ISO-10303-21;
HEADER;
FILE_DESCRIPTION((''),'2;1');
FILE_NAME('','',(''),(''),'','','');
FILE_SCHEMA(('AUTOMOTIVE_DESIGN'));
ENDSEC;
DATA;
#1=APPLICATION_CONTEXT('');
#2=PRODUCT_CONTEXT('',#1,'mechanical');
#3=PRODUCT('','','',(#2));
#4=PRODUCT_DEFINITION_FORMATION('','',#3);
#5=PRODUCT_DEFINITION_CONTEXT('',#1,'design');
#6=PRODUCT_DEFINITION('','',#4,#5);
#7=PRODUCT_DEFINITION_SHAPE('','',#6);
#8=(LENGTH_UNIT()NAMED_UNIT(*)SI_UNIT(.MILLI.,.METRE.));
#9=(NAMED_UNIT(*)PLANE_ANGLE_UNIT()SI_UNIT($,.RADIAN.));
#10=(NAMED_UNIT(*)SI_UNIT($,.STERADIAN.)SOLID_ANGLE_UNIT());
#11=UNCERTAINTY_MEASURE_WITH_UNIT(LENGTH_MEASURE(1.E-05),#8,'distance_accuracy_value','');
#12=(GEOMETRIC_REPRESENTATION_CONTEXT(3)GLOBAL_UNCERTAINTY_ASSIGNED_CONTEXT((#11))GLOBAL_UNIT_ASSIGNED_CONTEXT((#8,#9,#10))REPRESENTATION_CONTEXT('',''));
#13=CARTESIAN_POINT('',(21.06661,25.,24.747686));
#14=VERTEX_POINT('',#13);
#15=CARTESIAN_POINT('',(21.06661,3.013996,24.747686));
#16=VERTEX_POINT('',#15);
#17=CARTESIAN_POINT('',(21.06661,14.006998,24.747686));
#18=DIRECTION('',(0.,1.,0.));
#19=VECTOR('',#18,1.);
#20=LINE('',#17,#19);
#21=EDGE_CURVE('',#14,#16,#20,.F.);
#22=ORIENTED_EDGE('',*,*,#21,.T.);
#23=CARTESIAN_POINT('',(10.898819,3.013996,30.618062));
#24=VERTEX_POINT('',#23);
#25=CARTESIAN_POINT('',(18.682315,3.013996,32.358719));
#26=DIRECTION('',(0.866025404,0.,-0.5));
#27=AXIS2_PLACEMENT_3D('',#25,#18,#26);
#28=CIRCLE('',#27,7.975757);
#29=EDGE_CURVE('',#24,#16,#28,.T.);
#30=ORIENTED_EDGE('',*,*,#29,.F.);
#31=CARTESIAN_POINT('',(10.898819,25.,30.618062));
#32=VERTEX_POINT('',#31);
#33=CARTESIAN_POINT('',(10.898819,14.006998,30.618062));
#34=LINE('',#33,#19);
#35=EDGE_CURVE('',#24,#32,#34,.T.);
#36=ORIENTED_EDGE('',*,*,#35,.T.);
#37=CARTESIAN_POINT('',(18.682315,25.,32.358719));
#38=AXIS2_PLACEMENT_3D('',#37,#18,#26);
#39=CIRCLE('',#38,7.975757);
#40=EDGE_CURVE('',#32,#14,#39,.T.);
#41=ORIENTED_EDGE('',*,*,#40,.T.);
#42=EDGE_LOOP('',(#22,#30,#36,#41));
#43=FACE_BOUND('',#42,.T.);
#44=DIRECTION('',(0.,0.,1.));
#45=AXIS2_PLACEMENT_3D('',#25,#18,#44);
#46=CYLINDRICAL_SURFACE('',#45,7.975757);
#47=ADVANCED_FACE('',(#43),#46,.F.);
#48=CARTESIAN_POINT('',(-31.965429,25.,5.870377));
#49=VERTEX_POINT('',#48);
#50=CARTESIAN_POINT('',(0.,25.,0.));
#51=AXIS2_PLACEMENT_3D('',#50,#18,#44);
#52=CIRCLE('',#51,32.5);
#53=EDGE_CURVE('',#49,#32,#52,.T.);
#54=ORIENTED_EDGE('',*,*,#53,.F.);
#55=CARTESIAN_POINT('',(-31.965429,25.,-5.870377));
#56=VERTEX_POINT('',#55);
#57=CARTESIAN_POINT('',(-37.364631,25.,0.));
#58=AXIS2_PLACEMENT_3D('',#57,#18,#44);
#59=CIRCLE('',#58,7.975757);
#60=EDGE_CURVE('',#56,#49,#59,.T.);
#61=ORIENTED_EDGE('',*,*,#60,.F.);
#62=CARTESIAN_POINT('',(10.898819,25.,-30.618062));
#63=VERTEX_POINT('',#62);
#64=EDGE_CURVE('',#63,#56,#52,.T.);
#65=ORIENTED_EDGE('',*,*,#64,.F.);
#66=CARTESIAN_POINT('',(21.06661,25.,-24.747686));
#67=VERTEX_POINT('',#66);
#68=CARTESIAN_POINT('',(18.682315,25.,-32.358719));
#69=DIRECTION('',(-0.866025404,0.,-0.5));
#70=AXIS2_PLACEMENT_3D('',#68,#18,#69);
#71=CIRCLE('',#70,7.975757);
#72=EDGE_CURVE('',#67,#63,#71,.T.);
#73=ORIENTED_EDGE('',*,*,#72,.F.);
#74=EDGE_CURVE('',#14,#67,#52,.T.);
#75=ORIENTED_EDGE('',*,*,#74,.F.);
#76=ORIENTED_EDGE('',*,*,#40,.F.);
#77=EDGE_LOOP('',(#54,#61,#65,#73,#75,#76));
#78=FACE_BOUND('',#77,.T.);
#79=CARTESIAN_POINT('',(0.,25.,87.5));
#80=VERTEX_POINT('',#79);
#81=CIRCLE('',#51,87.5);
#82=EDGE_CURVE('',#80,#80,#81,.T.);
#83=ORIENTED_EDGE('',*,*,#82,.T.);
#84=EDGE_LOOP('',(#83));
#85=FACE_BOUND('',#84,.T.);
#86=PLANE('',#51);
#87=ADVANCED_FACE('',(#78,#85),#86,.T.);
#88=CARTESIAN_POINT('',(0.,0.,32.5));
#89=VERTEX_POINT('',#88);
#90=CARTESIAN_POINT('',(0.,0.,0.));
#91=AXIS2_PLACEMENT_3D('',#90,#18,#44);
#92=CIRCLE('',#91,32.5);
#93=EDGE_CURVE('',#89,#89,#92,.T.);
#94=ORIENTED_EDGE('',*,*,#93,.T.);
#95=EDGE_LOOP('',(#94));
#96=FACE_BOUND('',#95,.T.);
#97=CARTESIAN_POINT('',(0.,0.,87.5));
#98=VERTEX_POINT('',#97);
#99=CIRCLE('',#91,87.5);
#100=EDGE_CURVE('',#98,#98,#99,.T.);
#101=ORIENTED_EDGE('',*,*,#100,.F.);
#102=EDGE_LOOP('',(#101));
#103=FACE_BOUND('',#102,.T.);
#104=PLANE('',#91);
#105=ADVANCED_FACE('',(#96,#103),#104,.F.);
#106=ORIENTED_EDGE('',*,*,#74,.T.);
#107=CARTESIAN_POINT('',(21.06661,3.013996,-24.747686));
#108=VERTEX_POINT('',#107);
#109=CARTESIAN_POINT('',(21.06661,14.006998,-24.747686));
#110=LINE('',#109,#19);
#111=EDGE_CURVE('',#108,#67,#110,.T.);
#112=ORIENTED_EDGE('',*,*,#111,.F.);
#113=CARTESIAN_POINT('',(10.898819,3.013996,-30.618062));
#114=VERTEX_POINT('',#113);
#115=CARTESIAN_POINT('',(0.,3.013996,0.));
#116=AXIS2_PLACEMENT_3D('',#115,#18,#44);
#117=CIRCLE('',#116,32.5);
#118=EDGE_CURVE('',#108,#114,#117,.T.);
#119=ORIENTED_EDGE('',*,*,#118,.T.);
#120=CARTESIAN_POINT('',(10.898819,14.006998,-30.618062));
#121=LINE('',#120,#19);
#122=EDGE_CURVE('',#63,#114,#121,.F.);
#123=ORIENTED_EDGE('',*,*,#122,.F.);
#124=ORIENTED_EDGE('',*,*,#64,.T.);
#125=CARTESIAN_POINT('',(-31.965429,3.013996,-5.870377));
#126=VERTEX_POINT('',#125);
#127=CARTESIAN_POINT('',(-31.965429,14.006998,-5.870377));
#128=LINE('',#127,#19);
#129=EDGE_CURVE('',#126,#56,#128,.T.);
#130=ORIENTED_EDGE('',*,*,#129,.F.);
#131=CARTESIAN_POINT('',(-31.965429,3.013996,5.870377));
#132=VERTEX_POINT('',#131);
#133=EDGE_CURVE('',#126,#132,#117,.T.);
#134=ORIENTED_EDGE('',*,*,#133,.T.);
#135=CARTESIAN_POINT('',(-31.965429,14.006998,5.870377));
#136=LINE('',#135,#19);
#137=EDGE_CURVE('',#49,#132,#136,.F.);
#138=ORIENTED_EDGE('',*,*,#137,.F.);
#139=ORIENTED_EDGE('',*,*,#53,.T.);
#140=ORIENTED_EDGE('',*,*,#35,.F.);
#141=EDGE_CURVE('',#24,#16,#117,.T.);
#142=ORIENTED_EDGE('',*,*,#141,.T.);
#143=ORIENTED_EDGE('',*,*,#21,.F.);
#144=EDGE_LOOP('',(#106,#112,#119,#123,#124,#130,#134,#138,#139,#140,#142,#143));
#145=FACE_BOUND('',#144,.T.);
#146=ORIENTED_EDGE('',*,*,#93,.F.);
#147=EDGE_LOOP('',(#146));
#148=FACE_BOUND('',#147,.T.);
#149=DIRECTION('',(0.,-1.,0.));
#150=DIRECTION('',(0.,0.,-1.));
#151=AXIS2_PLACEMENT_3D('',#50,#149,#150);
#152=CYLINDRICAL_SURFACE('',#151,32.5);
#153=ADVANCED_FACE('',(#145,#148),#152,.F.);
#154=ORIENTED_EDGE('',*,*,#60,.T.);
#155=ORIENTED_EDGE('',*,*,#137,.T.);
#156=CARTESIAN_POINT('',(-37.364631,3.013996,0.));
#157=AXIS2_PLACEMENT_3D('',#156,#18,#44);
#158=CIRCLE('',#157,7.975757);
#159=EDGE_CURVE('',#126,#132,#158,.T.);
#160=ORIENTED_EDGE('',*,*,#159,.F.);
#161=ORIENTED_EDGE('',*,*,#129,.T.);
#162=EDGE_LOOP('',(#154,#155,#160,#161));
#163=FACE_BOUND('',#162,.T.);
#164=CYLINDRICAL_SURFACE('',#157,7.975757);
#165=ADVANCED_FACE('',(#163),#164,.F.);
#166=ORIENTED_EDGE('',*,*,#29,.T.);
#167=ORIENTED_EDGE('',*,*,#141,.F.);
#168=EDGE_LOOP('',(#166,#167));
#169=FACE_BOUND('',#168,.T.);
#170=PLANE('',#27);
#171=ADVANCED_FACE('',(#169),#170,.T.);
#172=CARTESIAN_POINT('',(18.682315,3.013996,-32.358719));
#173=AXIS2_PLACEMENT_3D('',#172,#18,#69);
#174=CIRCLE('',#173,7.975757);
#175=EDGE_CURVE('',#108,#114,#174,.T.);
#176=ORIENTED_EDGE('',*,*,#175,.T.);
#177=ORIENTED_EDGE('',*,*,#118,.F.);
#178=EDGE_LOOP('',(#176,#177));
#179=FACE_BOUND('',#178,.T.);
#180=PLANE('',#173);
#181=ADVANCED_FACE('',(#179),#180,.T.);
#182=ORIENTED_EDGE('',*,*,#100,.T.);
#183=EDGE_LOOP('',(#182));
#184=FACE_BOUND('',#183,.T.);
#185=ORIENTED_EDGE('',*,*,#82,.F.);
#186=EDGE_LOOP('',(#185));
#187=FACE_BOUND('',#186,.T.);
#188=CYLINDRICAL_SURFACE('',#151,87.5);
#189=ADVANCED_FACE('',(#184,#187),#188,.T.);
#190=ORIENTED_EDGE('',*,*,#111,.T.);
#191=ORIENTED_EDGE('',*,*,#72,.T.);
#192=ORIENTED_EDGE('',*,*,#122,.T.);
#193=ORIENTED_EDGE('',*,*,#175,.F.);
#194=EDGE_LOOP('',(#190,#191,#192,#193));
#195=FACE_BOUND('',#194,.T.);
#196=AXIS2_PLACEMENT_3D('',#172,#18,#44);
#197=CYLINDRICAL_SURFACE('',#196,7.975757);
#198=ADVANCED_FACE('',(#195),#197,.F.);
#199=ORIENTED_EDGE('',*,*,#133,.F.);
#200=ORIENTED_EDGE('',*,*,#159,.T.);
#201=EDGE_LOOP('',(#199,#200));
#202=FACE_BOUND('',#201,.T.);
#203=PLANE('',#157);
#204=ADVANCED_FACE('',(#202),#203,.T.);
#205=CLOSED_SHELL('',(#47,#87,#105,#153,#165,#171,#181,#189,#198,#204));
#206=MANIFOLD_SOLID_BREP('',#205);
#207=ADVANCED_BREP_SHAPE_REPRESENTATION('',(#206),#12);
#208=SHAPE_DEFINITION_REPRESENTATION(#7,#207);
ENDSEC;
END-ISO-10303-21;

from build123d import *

# Parameters (mm, degrees)
SKETCH1_R           = 87.5
BOSS_EXTRUDE1_DEPTH = 25
SKETCH2_R           = 32.5
CUT_EXTRUDE1_DEPTH  = 127.24381173
SKETCH3_R           = 7.975756775
CUT_EXTRUDE2_DEPTH  = 21.986004329
CIRPATTERN1_COUNT   = 3


with BuildPart() as part:
    # Sketch1 → Boss-Extrude1 (new body)
    with BuildSketch(Plane(origin=(0, 0, 0), x_dir=(1, 0, 0), z_dir=(0, 1, 0))):
        Circle(SKETCH1_R)
    extrude(amount=BOSS_EXTRUDE1_DEPTH)

    # Sketch2 → Cut-Extrude1 (cut, through all)
    with BuildSketch(Plane(origin=(0, 0, 0), x_dir=(1, 0, 0), z_dir=(0, 1, 0))):
        Circle(SKETCH2_R)
    extrude(amount=CUT_EXTRUDE1_DEPTH, mode=Mode.SUBTRACT)

    # Sketch3 → Cut-Extrude2 (cut)
    with BuildSketch(Plane(origin=(0, 25, 0), x_dir=(1, 0, 0), z_dir=(0, 1, 0))):
        with Locations((-37.364630723, 0)):
            Circle(SKETCH3_R)
    cut_extrude2 = extrude(amount=-CUT_EXTRUDE2_DEPTH, mode=Mode.SUBTRACT)

    # CirPattern1: Cut-Extrude2 ×3 about axis
    cirpattern1_axis = Axis((0, 0, 0), (0, 1, 0))
    for i in range(1, CIRPATTERN1_COUNT):
        add(cut_extrude2.rotate(cirpattern1_axis, i * 360 / CIRPATTERN1_COUNT), mode=Mode.SUBTRACT)


solid = part.part
